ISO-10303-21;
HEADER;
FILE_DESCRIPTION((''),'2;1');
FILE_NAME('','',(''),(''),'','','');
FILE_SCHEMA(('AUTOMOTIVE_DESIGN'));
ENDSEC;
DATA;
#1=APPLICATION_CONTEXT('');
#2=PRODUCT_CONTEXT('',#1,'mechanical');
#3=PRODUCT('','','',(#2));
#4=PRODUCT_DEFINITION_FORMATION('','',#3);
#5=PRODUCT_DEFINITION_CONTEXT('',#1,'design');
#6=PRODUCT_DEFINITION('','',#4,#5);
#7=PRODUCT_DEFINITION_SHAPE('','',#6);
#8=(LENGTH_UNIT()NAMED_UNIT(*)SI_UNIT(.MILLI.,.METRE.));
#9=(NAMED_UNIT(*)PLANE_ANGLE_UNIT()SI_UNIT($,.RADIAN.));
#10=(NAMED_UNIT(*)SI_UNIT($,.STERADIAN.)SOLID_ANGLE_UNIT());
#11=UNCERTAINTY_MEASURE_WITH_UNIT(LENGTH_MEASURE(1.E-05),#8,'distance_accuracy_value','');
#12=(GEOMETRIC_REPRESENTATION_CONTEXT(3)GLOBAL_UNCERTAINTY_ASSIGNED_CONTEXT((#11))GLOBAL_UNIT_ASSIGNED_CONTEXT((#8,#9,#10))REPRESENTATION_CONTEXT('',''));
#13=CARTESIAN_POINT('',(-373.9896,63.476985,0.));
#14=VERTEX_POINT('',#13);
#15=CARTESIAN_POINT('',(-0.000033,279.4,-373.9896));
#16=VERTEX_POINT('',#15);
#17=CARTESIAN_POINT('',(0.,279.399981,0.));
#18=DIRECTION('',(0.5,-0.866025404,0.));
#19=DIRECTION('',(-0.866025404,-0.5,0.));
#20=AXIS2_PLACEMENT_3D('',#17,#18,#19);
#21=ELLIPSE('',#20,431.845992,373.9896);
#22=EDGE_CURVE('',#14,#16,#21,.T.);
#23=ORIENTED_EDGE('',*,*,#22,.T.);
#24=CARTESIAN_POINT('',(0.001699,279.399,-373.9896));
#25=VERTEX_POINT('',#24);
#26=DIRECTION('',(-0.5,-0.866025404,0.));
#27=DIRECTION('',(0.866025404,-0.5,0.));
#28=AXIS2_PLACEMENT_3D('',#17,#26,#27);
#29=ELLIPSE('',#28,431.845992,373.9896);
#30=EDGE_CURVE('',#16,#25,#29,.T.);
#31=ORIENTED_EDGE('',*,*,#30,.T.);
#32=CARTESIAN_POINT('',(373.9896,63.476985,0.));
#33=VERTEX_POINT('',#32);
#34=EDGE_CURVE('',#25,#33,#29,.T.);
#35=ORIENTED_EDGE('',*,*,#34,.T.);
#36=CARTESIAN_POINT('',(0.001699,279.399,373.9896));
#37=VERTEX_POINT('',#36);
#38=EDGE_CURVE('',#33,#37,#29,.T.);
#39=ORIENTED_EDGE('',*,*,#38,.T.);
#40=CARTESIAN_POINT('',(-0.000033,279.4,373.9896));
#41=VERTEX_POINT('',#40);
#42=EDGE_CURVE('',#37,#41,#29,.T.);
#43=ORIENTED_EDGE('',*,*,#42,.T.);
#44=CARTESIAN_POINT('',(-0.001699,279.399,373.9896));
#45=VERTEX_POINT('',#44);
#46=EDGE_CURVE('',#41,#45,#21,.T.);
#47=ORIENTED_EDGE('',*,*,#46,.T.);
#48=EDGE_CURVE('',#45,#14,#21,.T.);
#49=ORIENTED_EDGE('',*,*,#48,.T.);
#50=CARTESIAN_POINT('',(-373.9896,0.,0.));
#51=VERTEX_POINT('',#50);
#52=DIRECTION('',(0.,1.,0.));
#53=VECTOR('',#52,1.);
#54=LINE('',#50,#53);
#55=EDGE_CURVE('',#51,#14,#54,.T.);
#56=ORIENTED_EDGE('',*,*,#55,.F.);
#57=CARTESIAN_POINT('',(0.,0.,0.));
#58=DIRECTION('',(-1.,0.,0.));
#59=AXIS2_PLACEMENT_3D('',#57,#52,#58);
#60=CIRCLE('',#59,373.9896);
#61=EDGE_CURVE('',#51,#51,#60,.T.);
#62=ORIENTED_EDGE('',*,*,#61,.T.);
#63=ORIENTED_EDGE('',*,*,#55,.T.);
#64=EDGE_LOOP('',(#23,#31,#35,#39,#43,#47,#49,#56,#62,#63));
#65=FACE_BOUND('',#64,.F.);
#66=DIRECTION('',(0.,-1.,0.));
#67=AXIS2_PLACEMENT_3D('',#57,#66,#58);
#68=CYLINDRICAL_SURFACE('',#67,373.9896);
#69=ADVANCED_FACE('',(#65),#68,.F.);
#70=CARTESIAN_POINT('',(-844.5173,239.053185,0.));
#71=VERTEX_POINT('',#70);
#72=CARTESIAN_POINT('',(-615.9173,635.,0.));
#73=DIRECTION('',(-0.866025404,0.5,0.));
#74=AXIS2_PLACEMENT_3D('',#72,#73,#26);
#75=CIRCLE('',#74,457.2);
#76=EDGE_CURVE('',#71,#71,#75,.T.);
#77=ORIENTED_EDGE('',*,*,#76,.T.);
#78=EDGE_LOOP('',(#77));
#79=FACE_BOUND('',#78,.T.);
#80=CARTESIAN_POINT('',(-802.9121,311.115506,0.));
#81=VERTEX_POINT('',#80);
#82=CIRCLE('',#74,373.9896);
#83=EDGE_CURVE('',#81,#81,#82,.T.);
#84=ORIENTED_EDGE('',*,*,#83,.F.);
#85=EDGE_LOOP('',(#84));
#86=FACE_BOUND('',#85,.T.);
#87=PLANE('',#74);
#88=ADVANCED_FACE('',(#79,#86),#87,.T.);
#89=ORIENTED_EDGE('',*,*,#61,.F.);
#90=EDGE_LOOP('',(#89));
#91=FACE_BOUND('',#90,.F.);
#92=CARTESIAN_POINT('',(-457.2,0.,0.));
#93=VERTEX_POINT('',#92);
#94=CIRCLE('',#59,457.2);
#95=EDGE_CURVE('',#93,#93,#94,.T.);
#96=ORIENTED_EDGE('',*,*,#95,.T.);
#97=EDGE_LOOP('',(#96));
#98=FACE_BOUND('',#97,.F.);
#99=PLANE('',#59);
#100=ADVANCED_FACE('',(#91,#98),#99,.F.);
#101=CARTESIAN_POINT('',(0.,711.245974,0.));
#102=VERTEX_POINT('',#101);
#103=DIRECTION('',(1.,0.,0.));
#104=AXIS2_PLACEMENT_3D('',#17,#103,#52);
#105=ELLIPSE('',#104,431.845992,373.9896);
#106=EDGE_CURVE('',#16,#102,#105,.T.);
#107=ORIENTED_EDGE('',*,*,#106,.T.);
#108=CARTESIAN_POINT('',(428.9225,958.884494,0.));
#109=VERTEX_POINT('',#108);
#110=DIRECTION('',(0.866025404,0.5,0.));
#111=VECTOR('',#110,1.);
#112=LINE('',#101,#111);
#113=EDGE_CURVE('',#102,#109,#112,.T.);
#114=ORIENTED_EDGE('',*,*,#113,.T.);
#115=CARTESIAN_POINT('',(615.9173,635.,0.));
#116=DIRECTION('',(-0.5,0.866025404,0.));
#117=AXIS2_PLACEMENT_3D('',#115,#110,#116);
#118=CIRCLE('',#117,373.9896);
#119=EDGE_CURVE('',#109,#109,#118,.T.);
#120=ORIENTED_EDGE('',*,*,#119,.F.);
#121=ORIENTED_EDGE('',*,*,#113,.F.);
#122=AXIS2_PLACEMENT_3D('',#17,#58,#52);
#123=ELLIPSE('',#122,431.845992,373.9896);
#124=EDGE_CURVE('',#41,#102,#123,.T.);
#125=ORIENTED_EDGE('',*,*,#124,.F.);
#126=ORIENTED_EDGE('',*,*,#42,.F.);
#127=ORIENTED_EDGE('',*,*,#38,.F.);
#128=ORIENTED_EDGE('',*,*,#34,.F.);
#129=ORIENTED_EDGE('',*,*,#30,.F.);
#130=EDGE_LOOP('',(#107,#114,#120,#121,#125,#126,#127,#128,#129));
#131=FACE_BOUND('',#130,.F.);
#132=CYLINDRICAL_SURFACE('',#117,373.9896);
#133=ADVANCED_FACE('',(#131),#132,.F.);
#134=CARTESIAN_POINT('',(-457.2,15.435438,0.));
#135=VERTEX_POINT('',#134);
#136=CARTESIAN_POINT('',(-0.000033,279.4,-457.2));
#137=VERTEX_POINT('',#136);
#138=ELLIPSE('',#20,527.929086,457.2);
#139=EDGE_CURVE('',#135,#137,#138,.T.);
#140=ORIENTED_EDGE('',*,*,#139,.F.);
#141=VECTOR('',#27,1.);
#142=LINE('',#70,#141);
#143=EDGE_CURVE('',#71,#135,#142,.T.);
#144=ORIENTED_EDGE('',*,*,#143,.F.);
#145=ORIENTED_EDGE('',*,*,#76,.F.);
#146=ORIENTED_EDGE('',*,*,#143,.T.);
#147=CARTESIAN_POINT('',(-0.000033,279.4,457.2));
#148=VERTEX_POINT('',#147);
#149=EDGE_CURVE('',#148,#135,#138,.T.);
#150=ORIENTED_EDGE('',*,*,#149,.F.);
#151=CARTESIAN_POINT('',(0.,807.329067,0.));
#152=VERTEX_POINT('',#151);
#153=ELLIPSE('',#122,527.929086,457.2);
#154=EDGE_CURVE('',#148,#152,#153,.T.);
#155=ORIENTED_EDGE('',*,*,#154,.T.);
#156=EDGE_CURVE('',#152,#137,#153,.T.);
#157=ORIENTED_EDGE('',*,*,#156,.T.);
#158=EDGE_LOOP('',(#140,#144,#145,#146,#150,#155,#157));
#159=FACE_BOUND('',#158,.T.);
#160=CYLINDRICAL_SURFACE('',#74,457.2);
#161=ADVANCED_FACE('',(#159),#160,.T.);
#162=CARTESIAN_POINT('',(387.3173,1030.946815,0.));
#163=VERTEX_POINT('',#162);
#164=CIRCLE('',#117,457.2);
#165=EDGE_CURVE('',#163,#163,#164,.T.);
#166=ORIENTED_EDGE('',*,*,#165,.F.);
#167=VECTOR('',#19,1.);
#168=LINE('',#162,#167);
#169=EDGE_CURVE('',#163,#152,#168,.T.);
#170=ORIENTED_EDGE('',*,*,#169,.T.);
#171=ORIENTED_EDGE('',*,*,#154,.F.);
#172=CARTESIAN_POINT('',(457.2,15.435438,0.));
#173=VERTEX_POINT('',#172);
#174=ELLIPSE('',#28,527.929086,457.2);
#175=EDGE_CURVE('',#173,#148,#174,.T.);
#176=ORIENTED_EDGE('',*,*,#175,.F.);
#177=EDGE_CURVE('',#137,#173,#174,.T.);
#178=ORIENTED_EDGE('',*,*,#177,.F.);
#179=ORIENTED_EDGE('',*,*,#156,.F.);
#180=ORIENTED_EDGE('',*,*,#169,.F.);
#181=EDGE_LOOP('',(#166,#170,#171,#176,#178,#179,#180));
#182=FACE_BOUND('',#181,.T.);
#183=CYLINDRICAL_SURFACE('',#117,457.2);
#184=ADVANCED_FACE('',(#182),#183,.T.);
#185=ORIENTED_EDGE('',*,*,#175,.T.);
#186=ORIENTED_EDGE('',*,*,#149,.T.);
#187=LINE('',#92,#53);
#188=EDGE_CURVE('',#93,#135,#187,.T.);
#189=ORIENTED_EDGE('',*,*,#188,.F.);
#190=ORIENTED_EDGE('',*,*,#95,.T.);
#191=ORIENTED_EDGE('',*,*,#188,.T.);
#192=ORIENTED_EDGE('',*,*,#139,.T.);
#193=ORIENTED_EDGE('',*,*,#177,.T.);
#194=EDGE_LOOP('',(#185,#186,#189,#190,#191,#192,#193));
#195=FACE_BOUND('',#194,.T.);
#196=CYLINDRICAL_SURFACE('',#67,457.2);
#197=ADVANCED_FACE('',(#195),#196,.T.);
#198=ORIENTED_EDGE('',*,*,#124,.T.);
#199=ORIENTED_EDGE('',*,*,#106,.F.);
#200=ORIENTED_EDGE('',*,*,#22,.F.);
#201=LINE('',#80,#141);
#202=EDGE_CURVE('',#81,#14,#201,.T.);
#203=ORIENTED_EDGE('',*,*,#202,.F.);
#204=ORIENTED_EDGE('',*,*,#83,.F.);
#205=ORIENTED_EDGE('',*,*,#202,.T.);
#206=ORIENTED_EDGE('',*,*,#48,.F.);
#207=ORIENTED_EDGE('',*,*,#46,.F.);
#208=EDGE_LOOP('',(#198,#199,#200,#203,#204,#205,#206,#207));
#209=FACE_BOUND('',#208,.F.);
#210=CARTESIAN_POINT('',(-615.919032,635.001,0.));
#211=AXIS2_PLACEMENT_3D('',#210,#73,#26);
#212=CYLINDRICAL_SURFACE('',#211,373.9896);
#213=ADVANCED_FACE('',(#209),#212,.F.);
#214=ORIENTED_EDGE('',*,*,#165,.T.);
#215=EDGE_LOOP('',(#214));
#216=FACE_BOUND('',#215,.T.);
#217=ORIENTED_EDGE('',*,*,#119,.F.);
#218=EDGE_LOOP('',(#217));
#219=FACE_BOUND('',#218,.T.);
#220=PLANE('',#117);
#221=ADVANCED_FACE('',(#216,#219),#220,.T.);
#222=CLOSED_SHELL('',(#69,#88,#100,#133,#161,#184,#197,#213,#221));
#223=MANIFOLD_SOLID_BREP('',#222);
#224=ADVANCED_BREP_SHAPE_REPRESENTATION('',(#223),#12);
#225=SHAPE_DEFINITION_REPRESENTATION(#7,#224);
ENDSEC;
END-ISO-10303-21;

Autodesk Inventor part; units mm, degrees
ref_plane "YZ Plane" through (0, 0, 0) normal (1, 0, 0) x (0, 1, 0)
sketch "Sketch1" plane through (0, 0, 0) normal (0, 0, 1) x (1, 0, 0)
  line L0 (0, 0) -> (0, 279.4)
  line L1 (0, 279.4) -> (615.9173, 635)
  line L2 (0, 279.4) -> (-615.9173, 635)
  line L3 (-615.9173, 635) -> (615.9173, 635) construction
  dimension "A_dimension" = 279.4
  dimension "angle" = 120
  dimension "B_dimension" = 711.2
sketch "Sketch2" plane through (0, 0, 0) normal (0, 1, 0) x (-1, 0, 0)
  circle A0 centre (0, 0) radius 457.2
  circle A1 centre (0, 0) radius 373.9896
  dimension "outerDiameter" = 914.4
  dimension "wallThickness" = 83.2104
ref_plane "Work Plane1" through (615.9173, 635, 0) normal (0.8660254, 0.5, 0) x (-0.5, 0.8660254, 0)
sketch "Sketch3" plane through (615.9173, 635, 0) normal (0.8660254, 0.5, 0) x (-0.5, 0.8660254, 0)
  circle A0 centre (0, 0) radius 457.2
  circle A1 centre (0, 0) radius 373.9896
  point P0 (-241.9675, 0)
  point P1 (0, 0)
  dimension "d7" = 914.4
  dimension "d8" = 83.2104
ref_plane "Work Plane2" through (-615.9173, 635, 0) normal (-0.8660254, 0.5, 0) x (-0.5, -0.8660254, 0)
sketch "Sketch4" plane through (-615.9173, 635, 0) normal (-0.8660254, 0.5, 0) x (-0.5, -0.8660254, 0)
  circle A0 centre (0, 0) radius 457.2
  circle A1 centre (0, 0) radius 373.9896
  point P0 (241.9675, 0)
  point P1 (0, 0)
  dimension "d9" = 914.4
  dimension "d11" = 83.2104
extrude "Extrusion1" add sketch "Sketch2" along normal up to surface (279.4 mm away)
extrude "Extrusion2" add sketch "Sketch4" against normal up to surface (711.2 mm away)
extrude "Extrusion3" add sketch "Sketch3" against normal up to surface (711.2 mm away)
extrude "Extrusion4" cut sketch "Sketch2" along normal up to surface (279.4 mm away) contours A1
extrude "Extrusion5" cut sketch "Sketch3" against normal up to surface (711.2 mm away) contours A1
extrude "Extrusion6" cut sketch "Sketch4" against normal up to surface (711.2 mm away) contours A1
extrude "Extrusion7" cut sketch "Sketch4" along normal through all contours A0 | A1
extrude "Extrusion8" cut sketch "Sketch3" along normal through all contours A0 | A1
extrude "Extrusion9" cut sketch "Sketch2" against normal through all contours A0 | A1
equation "\"d7\" = outerDiameter"
equation "\"d8\" = wallThickness"
equation "\"d9\" = outerDiameter"
equation "\"d11\" = wallThickness"
equation "\"nominalSize\" = 914.4"
properties part number "WYE-S36-SCH160-120"
